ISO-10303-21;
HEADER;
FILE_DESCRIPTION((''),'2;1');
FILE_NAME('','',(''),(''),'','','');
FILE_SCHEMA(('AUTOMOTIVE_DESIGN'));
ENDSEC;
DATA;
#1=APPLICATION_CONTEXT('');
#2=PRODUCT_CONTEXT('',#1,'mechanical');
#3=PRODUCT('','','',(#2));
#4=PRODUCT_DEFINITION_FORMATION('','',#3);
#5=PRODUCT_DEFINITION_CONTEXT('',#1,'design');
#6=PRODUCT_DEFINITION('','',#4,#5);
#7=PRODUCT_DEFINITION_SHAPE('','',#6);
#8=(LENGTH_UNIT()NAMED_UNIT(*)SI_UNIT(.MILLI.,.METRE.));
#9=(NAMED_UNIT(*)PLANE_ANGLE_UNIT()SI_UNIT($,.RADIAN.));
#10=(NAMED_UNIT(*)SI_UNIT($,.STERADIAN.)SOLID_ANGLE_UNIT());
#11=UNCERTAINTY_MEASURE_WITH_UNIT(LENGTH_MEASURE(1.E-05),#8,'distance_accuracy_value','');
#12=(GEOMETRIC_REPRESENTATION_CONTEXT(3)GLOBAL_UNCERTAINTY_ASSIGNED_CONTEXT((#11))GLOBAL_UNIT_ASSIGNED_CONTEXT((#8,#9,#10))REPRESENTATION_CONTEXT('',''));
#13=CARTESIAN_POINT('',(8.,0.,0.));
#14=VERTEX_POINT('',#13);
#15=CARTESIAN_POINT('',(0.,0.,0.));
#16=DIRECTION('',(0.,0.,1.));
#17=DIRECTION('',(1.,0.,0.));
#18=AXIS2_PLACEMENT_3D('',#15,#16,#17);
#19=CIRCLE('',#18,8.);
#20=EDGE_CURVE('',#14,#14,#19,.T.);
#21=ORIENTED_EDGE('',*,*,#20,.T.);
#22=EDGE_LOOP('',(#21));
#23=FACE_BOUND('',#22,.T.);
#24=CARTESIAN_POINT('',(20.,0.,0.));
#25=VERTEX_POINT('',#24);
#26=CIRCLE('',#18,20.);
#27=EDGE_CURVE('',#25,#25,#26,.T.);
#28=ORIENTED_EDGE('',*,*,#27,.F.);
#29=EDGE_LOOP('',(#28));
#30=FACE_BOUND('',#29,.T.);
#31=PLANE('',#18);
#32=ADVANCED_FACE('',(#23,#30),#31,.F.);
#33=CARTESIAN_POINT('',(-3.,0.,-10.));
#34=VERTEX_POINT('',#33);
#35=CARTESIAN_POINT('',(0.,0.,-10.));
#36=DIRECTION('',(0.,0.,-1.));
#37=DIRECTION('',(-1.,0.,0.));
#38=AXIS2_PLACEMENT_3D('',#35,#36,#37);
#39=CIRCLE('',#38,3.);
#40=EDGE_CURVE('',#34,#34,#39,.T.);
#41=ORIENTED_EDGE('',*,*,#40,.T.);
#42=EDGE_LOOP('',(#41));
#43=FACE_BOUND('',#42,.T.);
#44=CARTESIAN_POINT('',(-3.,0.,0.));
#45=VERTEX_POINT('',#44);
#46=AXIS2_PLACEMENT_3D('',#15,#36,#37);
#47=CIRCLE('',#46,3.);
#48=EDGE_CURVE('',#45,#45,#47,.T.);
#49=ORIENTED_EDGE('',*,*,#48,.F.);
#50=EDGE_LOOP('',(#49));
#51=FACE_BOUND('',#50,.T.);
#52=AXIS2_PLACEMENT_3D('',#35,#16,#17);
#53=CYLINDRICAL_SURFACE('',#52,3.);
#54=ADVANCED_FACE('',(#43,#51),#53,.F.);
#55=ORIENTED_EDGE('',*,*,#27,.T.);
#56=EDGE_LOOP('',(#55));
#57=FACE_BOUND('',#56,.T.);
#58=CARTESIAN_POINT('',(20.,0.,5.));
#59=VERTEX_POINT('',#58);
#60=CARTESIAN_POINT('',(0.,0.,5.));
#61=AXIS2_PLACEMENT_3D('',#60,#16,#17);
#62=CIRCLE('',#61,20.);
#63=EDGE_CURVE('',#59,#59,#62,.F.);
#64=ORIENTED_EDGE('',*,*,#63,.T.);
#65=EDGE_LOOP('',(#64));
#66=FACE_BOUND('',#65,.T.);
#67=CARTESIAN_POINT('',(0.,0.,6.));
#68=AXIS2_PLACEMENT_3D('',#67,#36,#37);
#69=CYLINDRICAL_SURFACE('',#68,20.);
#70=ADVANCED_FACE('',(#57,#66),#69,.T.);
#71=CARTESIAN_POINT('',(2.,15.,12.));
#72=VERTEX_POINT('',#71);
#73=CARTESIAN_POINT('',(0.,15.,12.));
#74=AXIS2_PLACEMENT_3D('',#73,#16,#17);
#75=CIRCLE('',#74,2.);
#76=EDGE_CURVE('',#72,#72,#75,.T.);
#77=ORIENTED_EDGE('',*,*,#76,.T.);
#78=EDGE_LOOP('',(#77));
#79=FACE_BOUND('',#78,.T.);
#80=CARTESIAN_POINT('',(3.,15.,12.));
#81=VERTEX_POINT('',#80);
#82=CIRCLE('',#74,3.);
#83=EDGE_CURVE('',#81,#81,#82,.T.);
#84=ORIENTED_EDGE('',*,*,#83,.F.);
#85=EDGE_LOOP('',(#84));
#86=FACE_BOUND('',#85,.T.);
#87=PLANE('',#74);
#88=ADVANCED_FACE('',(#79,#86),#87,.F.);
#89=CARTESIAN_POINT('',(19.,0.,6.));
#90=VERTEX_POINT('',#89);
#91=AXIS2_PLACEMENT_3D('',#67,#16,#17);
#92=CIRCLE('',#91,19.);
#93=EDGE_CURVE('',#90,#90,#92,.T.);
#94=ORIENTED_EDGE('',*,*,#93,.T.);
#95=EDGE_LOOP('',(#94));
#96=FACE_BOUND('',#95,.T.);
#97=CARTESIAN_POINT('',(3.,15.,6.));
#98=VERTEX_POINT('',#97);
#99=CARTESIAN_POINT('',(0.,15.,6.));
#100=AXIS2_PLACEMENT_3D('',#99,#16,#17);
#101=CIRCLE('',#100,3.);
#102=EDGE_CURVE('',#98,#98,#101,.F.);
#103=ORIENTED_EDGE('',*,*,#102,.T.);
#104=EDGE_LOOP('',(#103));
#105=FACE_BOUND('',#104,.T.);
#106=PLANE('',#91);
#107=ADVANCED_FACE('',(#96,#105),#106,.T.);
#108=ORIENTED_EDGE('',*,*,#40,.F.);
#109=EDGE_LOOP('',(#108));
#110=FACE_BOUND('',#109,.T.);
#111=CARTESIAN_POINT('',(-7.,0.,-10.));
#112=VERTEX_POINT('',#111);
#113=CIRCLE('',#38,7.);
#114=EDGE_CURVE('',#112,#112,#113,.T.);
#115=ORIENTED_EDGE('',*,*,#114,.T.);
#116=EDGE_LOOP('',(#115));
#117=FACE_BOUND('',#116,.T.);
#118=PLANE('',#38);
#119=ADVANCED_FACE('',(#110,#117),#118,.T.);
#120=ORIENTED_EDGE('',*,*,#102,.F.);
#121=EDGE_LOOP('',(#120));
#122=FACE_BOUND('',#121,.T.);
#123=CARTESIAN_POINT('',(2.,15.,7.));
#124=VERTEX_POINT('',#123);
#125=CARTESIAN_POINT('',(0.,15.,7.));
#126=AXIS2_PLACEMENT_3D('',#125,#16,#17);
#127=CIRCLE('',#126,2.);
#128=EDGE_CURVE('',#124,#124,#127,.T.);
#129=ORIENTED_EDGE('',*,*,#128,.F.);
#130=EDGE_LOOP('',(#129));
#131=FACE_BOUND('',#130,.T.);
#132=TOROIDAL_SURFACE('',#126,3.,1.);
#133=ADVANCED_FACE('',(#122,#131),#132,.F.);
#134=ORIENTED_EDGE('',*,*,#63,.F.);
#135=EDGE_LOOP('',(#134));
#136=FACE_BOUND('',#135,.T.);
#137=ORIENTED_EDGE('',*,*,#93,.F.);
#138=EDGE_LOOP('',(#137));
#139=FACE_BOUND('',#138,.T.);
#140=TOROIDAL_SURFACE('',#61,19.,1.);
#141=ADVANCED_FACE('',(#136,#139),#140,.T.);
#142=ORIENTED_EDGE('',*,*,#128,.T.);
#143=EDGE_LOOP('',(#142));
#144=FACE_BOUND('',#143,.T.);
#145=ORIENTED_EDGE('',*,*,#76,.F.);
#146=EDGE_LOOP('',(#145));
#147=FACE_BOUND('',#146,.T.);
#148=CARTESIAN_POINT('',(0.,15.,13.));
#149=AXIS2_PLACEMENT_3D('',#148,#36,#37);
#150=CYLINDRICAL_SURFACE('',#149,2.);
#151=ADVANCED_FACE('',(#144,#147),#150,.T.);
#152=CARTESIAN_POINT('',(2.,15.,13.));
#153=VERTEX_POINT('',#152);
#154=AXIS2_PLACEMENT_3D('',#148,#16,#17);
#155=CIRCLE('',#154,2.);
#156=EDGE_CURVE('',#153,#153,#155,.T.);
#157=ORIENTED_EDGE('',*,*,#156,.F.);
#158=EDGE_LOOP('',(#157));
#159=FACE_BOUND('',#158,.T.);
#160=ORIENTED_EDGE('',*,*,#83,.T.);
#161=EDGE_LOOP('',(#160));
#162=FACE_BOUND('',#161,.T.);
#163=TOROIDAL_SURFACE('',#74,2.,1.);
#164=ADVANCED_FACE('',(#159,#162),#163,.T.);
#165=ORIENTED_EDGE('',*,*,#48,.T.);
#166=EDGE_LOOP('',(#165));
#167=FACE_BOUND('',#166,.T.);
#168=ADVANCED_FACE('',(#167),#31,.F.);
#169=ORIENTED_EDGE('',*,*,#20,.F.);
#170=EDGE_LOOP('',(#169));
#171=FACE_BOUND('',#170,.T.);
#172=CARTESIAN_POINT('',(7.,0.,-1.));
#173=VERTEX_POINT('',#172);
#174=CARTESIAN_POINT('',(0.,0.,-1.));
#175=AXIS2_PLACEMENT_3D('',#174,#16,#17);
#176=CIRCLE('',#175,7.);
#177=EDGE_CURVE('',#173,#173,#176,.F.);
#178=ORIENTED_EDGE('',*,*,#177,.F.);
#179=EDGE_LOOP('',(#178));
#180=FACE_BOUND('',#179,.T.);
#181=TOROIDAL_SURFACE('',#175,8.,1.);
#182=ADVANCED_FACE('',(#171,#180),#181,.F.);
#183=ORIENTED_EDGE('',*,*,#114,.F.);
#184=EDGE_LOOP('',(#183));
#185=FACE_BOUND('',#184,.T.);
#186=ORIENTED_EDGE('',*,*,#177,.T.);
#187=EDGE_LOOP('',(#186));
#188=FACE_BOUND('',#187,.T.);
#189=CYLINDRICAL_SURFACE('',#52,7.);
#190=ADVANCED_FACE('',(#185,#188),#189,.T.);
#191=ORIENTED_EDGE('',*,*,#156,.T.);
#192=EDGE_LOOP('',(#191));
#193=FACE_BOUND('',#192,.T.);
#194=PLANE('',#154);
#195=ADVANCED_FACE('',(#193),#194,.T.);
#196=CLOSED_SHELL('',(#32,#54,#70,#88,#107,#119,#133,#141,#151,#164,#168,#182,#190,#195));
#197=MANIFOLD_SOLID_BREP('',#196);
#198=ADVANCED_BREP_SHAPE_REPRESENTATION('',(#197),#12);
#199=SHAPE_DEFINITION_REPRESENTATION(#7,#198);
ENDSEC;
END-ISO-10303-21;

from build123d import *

# Parameters (mm, degrees)
SKETCH1_R           = 20
BOSS_EXTRUDE1_DEPTH = 6
SKETCH2_R           = 7
SKETCH2_R_2         = 3
BOSS_EXTRUDE2_DEPTH = 10
SKETCH3_R           = 2
BOSS_EXTRUDE3_DEPTH = 7
SKETCH4_R           = 3
BOSS_EXTRUDE4_DEPTH = 1
FILLET1_R           = 1


with BuildPart() as part:
    # Sketch1 → Boss-Extrude1 (new body)
    with BuildSketch(Plane.XY):
        Circle(SKETCH1_R)
    extrude(amount=BOSS_EXTRUDE1_DEPTH)

    # Sketch2 → Boss-Extrude2 (add)
    with BuildSketch(Plane(origin=(0, 0, 0), x_dir=(-1, 0, 0), z_dir=(0, 0, -1))):
        with Locations(Location((0, 0, 0), (0, 0, 180))):
            Circle(SKETCH2_R)
        Circle(SKETCH2_R_2, mode=Mode.SUBTRACT)
    extrude(amount=BOSS_EXTRUDE2_DEPTH)

    # Sketch3 → Boss-Extrude3 (add)
    with BuildSketch(Plane.XY.offset(6)):
        with Locations((0, 15)):
            Circle(SKETCH3_R)
    extrude(amount=BOSS_EXTRUDE3_DEPTH)

    # Sketch4 → Boss-Extrude4 (add)
    with BuildSketch(Plane.XY.offset(13)):
        with Locations((0, 15)):
            Circle(SKETCH4_R)
    extrude(amount=-BOSS_EXTRUDE4_DEPTH)

    # Fillet1
    fillet1_edges = [part.edges().sort_by_distance(p)[0] for p in [
        (-2, 15, 6),
        (-3, 15, 13),
        (-20, 0, 6),
        (-7, 0, 0),
    ]]
    fillet(fillet1_edges, radius=FILLET1_R - 0.0001)  # a hair under: the kernel refuses the full size


solid = part.part
